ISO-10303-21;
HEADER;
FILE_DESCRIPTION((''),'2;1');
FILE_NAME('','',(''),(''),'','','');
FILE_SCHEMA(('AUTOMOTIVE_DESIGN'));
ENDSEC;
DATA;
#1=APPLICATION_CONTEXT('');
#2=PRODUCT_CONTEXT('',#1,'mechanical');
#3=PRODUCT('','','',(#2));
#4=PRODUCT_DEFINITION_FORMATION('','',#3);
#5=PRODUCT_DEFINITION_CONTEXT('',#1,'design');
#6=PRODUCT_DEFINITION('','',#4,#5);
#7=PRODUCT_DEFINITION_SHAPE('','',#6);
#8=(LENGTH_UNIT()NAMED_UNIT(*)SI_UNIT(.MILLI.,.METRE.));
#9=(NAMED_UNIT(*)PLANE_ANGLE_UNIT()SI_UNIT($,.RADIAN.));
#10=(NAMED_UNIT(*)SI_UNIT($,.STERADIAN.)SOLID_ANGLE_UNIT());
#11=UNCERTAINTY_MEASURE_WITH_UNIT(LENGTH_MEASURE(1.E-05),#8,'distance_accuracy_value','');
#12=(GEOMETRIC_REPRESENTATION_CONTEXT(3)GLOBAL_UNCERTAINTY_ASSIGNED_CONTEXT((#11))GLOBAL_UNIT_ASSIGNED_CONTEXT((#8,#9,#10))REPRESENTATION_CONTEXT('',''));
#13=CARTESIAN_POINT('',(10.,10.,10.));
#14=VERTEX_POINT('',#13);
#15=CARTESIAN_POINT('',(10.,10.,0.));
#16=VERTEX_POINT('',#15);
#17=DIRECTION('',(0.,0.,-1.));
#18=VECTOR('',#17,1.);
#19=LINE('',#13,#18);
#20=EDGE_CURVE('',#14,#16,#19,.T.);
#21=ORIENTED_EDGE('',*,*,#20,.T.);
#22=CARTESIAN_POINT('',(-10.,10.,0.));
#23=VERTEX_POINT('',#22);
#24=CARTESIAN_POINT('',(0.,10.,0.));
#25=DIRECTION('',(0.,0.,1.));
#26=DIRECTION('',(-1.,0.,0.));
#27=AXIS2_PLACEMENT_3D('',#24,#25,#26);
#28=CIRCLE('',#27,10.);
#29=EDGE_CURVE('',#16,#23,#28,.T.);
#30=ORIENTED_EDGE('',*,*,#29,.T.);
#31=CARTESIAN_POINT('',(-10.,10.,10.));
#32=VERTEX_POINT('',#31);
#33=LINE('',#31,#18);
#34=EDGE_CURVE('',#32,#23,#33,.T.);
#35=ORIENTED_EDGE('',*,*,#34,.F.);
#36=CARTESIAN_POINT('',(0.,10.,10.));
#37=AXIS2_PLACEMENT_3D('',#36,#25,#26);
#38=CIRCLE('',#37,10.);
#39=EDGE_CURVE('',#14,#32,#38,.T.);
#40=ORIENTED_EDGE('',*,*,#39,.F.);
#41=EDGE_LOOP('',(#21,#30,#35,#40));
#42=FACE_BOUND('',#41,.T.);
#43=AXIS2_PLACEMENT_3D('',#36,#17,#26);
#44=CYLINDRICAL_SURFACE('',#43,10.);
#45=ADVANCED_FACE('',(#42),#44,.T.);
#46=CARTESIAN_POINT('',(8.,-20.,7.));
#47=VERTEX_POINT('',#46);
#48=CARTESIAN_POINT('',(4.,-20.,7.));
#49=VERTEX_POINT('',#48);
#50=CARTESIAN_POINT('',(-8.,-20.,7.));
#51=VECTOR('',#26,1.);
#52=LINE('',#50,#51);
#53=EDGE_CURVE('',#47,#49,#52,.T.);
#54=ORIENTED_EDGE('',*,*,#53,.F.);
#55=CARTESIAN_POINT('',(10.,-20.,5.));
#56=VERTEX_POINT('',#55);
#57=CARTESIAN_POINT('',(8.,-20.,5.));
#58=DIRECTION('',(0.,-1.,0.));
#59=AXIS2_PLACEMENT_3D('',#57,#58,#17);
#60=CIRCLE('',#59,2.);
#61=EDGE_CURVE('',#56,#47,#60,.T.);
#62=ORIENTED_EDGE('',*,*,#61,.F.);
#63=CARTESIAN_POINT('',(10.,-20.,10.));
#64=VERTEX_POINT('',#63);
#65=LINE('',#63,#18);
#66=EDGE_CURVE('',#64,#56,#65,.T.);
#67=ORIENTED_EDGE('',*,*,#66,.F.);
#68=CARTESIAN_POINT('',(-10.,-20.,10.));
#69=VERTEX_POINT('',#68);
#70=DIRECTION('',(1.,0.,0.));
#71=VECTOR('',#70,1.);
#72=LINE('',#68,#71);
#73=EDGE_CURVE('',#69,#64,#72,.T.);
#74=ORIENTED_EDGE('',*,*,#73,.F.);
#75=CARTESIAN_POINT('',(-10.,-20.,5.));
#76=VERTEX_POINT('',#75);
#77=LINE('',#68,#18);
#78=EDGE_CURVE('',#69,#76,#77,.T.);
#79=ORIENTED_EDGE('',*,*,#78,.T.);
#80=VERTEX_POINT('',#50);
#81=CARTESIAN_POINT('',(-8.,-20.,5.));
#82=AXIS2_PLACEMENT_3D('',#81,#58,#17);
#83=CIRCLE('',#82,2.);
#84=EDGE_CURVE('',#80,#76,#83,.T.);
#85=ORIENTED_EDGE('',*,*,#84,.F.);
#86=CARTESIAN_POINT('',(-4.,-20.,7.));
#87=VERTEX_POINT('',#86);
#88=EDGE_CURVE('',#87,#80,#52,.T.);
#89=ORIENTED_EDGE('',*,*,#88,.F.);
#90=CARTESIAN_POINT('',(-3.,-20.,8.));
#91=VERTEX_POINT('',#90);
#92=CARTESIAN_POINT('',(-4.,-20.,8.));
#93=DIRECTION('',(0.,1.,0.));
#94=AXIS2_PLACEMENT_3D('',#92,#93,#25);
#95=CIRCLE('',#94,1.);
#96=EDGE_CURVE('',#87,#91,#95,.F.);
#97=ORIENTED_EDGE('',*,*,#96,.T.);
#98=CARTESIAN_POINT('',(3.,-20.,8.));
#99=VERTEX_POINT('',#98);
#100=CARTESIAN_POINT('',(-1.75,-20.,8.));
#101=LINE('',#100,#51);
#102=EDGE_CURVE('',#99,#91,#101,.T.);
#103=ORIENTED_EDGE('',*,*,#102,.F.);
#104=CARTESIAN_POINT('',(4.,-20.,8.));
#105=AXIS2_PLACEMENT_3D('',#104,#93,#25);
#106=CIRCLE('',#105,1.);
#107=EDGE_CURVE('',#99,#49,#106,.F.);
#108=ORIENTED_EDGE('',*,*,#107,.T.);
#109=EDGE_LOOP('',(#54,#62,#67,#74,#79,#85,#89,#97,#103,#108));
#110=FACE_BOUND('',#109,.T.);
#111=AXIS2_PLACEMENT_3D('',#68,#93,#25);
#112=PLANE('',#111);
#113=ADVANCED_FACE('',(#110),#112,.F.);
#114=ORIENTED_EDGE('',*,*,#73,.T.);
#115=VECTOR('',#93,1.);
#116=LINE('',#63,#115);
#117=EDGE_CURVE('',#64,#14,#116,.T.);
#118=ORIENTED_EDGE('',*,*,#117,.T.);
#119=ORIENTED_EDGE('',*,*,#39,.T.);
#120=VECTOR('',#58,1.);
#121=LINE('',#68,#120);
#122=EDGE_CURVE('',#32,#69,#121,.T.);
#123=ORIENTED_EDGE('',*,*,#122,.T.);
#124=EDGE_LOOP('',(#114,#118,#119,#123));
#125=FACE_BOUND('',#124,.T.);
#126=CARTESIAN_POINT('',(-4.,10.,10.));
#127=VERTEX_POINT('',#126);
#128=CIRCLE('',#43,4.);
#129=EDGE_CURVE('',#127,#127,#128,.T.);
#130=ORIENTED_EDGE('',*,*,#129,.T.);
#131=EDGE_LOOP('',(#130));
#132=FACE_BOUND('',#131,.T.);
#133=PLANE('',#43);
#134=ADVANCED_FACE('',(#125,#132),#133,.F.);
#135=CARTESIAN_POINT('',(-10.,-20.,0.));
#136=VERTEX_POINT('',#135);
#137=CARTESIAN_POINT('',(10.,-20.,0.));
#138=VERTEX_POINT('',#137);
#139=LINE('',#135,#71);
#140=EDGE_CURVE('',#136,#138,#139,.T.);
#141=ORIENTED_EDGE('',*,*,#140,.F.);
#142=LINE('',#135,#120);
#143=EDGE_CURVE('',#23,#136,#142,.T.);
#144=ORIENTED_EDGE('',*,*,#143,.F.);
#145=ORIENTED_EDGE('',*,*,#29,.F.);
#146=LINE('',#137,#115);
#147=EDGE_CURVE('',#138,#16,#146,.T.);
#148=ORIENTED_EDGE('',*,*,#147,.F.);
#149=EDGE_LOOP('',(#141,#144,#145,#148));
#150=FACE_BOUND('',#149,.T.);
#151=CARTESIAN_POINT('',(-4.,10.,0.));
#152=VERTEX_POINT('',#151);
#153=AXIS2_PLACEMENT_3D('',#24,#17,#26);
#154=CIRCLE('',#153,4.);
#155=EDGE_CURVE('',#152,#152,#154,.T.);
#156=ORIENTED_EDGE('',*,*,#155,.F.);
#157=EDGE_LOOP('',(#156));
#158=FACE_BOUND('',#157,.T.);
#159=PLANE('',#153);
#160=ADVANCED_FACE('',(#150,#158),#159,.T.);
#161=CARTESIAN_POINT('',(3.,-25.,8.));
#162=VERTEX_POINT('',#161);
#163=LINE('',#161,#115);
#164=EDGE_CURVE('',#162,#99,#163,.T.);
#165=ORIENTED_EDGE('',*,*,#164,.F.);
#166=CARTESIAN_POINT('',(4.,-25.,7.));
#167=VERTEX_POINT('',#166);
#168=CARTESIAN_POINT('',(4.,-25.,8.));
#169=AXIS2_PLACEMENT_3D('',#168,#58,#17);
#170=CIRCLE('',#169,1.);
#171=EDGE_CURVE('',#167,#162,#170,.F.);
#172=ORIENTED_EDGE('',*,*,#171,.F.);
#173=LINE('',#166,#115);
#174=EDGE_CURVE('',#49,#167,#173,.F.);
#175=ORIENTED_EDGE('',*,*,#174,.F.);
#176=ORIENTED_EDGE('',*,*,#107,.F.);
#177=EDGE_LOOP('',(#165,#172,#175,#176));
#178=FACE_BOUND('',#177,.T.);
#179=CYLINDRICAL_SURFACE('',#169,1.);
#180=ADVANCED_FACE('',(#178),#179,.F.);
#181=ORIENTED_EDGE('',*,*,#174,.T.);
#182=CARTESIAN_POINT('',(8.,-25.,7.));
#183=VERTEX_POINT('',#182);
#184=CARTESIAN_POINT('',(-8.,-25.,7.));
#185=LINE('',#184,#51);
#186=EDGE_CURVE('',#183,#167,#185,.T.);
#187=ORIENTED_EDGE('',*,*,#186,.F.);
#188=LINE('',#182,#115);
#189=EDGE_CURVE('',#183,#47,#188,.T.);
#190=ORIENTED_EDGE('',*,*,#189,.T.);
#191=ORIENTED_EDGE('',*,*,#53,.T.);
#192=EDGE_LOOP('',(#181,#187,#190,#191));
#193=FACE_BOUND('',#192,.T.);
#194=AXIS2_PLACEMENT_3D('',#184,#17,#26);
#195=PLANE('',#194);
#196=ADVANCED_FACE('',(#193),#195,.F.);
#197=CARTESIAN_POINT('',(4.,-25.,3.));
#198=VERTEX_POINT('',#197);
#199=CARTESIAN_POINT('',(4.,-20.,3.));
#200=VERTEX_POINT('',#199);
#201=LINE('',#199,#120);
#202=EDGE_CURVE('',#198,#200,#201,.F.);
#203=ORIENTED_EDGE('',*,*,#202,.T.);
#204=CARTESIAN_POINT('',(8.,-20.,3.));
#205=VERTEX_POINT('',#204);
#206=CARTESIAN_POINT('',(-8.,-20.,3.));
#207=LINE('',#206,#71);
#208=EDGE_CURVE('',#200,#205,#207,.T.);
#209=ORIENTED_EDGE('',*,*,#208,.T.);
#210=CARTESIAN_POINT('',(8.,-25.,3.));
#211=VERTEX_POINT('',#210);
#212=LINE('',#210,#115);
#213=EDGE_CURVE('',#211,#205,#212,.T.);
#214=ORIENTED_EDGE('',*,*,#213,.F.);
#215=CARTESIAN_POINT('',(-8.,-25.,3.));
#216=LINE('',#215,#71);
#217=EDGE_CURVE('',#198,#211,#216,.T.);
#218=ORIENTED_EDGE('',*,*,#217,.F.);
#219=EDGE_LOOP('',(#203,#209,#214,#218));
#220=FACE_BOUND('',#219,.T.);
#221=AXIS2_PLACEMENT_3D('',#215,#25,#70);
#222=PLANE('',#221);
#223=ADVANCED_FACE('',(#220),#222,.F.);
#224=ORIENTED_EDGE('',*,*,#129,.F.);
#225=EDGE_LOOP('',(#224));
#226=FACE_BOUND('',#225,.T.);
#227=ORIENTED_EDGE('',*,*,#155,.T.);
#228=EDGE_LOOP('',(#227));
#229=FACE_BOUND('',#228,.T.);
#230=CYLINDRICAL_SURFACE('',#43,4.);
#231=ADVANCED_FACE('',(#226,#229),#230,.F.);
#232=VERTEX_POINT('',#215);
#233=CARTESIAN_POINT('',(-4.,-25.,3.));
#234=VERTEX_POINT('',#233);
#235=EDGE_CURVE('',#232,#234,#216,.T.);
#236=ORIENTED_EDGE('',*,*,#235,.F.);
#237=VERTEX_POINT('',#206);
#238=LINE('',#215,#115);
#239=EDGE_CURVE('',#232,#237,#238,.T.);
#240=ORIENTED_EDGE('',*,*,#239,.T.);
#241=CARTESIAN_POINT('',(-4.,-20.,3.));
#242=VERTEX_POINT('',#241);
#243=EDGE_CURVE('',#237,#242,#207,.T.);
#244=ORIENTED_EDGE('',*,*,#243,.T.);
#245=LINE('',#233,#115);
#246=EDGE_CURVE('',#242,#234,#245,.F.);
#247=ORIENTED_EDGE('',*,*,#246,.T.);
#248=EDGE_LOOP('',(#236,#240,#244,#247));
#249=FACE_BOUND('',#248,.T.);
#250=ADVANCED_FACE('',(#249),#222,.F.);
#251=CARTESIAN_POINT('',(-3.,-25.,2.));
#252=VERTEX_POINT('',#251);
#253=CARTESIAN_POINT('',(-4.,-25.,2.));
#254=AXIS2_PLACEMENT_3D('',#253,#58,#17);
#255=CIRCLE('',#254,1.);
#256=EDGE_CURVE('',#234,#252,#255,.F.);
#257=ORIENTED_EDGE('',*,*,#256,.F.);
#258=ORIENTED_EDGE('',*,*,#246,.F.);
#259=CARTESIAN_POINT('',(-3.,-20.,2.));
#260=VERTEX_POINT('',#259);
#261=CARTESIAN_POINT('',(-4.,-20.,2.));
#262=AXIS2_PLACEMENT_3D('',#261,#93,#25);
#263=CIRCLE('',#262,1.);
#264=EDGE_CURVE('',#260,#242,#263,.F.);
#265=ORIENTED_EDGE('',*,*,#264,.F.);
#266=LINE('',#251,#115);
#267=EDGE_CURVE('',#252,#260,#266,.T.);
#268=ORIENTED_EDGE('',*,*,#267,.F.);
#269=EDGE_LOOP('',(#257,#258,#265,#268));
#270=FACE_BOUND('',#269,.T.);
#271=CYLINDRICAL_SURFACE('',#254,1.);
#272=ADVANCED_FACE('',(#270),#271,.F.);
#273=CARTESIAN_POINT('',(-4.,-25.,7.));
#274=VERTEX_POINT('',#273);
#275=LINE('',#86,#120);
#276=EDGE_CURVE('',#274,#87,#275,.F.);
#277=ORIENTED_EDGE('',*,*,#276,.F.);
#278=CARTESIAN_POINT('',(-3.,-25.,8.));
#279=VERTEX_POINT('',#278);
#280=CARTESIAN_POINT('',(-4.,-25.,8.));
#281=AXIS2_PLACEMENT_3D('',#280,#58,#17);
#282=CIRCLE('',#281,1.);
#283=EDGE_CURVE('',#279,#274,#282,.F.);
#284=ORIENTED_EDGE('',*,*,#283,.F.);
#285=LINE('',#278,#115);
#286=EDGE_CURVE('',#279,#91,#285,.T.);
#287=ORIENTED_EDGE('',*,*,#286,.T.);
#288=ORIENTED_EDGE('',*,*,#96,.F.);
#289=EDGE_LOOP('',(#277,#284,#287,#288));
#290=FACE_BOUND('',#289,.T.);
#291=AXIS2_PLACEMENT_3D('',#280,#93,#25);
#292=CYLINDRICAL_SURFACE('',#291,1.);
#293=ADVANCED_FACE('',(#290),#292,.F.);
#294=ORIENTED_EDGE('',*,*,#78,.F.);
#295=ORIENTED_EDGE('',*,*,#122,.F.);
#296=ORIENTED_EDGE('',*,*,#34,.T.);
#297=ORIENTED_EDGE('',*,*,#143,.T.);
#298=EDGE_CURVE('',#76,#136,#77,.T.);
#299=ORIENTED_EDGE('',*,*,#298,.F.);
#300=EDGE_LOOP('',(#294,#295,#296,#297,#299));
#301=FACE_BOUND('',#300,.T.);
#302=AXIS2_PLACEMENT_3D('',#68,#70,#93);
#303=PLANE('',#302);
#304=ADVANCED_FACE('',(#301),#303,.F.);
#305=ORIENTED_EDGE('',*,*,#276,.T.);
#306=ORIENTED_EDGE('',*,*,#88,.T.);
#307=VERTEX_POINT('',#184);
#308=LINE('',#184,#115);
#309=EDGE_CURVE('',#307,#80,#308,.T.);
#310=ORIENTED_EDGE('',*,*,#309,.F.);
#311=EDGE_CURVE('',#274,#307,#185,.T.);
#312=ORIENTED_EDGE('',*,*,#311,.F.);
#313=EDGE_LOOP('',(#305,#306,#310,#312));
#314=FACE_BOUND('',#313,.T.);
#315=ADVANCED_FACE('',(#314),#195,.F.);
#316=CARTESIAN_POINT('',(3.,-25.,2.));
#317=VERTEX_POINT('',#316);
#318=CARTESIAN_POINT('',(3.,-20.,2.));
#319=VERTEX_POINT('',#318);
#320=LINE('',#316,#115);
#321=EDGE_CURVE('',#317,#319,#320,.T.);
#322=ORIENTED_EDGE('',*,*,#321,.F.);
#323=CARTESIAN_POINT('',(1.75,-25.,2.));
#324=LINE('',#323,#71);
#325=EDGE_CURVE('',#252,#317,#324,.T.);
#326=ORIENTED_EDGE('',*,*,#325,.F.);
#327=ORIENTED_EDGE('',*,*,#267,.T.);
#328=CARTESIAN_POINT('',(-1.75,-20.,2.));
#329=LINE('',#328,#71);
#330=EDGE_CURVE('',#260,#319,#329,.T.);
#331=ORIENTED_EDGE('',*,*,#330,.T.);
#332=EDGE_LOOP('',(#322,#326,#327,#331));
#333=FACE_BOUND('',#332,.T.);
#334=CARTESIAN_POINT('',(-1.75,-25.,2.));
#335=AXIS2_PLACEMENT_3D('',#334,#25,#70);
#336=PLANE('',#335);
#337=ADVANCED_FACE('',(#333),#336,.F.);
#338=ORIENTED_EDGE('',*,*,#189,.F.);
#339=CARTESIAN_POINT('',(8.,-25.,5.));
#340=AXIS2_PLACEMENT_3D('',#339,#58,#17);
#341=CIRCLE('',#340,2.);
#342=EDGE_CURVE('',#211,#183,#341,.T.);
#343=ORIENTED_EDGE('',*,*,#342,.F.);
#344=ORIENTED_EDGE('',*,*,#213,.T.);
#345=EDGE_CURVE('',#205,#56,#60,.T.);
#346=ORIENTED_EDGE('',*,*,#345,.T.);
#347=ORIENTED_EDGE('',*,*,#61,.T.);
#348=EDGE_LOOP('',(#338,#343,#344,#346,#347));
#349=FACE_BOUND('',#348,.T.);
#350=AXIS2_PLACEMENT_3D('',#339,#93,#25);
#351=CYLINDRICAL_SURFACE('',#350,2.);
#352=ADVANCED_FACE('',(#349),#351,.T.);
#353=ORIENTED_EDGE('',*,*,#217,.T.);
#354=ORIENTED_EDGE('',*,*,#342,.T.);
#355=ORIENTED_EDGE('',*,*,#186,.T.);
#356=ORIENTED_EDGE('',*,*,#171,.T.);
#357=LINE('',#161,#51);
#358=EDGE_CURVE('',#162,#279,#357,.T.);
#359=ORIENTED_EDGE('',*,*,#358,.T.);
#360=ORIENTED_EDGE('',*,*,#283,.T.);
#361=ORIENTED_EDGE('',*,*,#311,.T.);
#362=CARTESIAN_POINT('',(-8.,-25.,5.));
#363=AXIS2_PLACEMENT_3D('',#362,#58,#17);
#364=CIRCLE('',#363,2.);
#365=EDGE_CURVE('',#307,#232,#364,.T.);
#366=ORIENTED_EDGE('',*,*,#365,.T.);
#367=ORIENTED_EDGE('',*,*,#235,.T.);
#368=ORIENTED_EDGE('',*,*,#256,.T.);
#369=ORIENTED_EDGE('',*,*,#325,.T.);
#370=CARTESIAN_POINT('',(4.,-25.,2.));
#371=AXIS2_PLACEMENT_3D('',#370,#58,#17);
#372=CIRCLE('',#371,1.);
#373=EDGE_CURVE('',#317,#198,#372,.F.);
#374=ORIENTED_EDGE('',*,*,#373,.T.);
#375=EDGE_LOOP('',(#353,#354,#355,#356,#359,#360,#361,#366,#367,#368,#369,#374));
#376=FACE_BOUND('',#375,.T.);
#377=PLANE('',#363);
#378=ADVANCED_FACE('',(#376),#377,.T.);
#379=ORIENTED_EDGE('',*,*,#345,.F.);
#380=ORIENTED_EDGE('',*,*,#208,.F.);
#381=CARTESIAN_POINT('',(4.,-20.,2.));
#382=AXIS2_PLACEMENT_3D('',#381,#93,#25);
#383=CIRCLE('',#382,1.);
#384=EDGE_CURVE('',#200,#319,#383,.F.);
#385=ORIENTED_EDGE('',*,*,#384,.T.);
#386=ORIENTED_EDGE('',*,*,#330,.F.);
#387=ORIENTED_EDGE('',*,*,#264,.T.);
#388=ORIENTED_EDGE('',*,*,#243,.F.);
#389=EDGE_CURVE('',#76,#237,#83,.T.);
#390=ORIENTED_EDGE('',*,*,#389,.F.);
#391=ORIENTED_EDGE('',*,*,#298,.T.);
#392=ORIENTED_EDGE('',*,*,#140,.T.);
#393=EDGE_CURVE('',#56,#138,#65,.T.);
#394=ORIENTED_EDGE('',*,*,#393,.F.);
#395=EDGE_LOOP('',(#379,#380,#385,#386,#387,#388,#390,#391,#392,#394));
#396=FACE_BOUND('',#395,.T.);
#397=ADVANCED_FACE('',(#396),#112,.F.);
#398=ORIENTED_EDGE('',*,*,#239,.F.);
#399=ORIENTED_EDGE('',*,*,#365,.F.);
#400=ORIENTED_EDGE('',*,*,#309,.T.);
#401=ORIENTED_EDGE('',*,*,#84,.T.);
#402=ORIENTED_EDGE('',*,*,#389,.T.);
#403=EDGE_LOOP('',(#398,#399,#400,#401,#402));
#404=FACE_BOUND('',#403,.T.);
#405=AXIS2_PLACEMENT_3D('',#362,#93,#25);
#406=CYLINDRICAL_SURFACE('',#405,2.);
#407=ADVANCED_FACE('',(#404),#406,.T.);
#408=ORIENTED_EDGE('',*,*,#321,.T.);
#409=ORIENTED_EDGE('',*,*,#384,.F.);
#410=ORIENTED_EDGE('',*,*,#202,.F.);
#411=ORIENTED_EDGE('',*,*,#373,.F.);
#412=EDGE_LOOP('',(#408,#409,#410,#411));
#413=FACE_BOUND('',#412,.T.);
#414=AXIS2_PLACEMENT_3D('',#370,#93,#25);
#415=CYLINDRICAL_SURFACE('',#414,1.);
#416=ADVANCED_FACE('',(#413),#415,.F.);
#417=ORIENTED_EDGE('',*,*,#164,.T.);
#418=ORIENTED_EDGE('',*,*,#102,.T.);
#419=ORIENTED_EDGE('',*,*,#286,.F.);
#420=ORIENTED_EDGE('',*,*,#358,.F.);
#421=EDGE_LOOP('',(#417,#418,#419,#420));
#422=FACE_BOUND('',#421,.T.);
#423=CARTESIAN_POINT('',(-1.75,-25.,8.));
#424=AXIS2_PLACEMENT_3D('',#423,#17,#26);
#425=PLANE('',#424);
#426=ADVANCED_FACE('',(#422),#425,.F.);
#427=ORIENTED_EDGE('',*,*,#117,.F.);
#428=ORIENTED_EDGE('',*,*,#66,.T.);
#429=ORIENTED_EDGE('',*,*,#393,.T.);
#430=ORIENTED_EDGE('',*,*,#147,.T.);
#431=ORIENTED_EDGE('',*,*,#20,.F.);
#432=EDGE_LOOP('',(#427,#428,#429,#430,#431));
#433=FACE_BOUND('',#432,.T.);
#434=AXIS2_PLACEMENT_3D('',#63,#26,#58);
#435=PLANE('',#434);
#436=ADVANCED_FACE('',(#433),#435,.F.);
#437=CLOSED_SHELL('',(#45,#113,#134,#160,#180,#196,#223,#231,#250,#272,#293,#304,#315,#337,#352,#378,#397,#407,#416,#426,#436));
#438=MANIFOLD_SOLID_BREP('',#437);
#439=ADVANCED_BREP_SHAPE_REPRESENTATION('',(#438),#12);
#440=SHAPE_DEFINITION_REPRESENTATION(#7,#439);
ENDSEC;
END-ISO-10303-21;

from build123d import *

# Parameters (mm, degrees)
BOSS_EXTRUDE1_DEPTH = 10
SKETCH2_R           = 4
CUT_EXTRUDE1_DEPTH  = 10
BOSS_EXTRUDE2_DEPTH = 5
BOSS_EXTRUDE3_DEPTH = 5
FILLET1_R           = 1


with BuildPart() as part:
    # Sketch1 → Boss-Extrude1 (new body)
    with BuildSketch(Plane.XY):
        with BuildLine():
            Line((-10, -20), (10, -20))
            Line((10, -20), (10, 10))
            ThreePointArc((10, 10), (0, 20), (-10, 10))
            Line((-10, 10), (-10, -20))
        make_face()
    extrude(amount=BOSS_EXTRUDE1_DEPTH)

    # Sketch2 → Cut-Extrude1 (cut)
    with BuildSketch(Plane(origin=(0, 0, 0), x_dir=(-1, 0, 0), z_dir=(0, 0, -1))):
        with Locations((0, 10)):
            Circle(SKETCH2_R)
    extrude(amount=-CUT_EXTRUDE1_DEPTH, mode=Mode.SUBTRACT)

    # Sketch3 → Boss-Extrude2 (add)
    with BuildSketch(Plane.XZ.offset(20)):
        with BuildLine():
            Line((-8, 7), (8, 7))
            ThreePointArc((8, 7), (10, 5), (8, 3))
            Line((8, 3), (-8, 3))
            ThreePointArc((-8, 3), (-10, 5), (-8, 7))
        make_face()
    extrude(amount=BOSS_EXTRUDE2_DEPTH)

    # Sketch4 → Boss-Extrude3 (add)
    with BuildSketch(Plane.XZ.offset(20)):
        Polygon((-1.75, 8), (1.75, 8), (3, 8), (3, 6.75), (3, 3.25), (3, 2), (1.75, 2), (-1.75, 2), (-3, 2), (-3, 3.25), (-3, 6.75), (-3, 8), align=None)
    extrude(amount=BOSS_EXTRUDE3_DEPTH)

    # Fillet1
    fillet1_edges = [part.edges().sort_by_distance(p)[0] for p in [
        (3, -22.5, 7),
        (3, -22.5, 3),
        (-3, -22.5, 3),
        (-3, -22.5, 7),
    ]]
    fillet(fillet1_edges, radius=FILLET1_R - 0.0001)  # a hair under: the kernel refuses the full size


solid = part.part
